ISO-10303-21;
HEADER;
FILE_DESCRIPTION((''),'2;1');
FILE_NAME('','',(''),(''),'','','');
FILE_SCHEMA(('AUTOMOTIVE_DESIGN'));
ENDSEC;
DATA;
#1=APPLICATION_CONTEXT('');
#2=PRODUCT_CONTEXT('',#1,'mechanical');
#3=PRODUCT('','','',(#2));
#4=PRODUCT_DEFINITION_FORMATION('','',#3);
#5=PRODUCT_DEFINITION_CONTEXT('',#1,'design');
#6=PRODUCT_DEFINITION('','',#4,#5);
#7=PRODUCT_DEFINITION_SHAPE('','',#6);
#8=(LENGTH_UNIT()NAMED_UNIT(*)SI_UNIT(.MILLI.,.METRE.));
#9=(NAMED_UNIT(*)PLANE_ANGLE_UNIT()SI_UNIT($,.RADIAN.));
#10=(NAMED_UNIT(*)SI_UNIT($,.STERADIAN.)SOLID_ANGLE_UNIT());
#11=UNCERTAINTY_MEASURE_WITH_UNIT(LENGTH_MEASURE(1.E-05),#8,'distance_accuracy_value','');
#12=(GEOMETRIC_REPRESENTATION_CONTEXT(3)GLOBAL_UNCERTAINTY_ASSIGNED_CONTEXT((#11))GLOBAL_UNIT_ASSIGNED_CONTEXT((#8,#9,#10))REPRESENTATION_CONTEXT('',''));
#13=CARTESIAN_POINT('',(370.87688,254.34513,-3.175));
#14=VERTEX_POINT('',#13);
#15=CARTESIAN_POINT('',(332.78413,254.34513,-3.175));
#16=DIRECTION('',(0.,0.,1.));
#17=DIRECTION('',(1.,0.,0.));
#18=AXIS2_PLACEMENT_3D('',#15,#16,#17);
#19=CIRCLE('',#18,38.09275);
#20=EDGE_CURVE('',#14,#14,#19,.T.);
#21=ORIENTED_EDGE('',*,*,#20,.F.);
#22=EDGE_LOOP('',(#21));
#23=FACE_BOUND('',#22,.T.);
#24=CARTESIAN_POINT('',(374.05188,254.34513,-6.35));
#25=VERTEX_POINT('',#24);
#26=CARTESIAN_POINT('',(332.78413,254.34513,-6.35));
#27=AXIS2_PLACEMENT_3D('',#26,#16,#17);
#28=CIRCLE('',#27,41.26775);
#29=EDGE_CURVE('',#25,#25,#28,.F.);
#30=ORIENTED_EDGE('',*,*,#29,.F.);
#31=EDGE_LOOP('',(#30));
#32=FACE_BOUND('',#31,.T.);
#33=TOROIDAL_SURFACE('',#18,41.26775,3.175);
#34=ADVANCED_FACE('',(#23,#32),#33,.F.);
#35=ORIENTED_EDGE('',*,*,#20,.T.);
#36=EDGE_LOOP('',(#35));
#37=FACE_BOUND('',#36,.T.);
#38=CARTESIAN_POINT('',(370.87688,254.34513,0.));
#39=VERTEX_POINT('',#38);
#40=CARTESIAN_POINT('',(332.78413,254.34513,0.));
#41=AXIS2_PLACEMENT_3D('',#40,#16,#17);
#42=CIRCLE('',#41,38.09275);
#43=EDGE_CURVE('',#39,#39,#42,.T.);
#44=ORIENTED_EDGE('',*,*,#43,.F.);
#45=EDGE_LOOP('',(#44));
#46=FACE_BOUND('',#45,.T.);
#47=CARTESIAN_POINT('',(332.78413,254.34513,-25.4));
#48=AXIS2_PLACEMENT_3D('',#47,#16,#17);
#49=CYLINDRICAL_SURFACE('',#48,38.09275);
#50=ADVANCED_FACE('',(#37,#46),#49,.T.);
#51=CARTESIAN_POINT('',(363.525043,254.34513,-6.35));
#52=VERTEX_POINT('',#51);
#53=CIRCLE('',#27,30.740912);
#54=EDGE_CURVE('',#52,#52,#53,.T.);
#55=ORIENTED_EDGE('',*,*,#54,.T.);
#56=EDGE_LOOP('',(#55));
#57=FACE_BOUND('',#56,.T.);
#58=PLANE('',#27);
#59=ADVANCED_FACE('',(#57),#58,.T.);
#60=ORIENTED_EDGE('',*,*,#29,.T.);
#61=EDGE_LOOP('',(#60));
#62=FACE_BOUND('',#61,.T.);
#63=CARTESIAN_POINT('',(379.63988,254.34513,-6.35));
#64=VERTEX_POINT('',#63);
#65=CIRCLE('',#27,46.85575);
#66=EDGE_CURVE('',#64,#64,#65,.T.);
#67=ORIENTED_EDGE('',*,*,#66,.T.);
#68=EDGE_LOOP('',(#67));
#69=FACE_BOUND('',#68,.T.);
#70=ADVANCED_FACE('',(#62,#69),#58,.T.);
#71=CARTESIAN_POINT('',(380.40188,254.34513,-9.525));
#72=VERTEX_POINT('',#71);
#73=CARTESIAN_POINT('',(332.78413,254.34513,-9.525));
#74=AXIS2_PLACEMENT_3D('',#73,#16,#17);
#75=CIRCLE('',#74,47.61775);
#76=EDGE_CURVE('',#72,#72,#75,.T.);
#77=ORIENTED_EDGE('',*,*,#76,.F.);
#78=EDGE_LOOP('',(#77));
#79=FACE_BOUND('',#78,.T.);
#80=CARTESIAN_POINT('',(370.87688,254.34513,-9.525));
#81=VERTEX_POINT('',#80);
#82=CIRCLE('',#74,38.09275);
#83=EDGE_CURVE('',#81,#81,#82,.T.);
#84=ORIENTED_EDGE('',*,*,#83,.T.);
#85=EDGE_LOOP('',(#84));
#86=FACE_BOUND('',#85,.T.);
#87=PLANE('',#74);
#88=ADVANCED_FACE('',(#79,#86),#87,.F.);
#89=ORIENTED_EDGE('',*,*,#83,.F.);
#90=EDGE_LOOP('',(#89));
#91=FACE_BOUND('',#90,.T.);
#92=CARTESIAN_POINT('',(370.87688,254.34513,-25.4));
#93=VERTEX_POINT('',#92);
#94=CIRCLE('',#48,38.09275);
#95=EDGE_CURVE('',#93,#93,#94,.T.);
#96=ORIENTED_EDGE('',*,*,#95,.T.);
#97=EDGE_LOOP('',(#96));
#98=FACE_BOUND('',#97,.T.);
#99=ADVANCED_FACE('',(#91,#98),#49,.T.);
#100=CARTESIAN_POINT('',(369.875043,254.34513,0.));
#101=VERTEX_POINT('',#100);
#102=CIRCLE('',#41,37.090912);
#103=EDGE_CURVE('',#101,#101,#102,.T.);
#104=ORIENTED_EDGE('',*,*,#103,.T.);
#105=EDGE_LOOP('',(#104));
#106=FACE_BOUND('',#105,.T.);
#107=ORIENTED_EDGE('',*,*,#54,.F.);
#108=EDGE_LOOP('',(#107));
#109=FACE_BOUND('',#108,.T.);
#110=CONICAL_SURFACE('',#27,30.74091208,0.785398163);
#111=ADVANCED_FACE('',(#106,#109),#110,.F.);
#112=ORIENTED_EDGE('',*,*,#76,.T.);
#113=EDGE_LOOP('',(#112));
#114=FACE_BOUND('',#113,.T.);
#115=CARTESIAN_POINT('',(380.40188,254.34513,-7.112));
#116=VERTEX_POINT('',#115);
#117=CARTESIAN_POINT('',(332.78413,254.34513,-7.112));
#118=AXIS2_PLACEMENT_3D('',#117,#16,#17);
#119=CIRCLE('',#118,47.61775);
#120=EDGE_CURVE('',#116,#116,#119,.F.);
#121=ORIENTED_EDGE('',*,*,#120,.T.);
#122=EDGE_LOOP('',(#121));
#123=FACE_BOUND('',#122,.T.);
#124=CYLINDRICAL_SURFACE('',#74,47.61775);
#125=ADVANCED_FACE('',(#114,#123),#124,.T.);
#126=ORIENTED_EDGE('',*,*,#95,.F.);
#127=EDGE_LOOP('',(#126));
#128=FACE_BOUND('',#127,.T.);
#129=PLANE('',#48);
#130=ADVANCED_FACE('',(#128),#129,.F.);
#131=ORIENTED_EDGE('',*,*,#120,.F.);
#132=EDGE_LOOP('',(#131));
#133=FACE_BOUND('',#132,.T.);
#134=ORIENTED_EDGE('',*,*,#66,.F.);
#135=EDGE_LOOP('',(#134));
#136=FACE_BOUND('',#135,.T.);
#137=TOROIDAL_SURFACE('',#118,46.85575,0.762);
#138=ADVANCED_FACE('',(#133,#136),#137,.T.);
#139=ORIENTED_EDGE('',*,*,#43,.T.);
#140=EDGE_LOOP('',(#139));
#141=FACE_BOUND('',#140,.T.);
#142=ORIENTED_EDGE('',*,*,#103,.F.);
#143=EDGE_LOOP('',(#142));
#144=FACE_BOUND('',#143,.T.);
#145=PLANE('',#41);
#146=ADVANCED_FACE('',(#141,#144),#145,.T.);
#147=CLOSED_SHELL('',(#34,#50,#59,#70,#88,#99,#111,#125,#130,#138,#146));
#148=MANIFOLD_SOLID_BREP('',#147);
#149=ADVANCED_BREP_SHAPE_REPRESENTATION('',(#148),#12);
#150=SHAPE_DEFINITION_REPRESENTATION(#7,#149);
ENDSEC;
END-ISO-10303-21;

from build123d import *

# Parameters (mm, degrees)
SKETCH2_R      = 38.092749534
EXTRUDE1_DEPTH = 25.4
SKETCH3_R      = 37.09091208
EXTRUDE2_DEPTH = 6.35
CHAMFER1_SIZE  = 6.35
EXTRUDE7_START = -6.35
SKETCH10_R     = 47.61774957
SKETCH10_R_2   = 38.092749534
EXTRUDE7_DEPTH = 3.175
FILLET1_R      = 3.175
FILLET2_R      = 0.762


with BuildPart() as part:
    # Sketch2 → Extrude1 (new body)
    with BuildSketch(Plane.XY):
        with Locations((332.784130452, 254.345130463)):
            Circle(SKETCH2_R)
    extrude(amount=-EXTRUDE1_DEPTH)

    # Sketch3 → Extrude2 (cut)
    with BuildSketch(Plane.XY):
        with Locations((332.784130452, 254.345130463)):
            Circle(SKETCH3_R)
    extrude(amount=-EXTRUDE2_DEPTH, mode=Mode.SUBTRACT)

    # Chamfer1
    chamfer1_edges = [part.edges().sort_by_distance(p)[0] for p in [
        (295.693218372, 254.345130463, -6.35),
    ]]
    chamfer(chamfer1_edges, length=CHAMFER1_SIZE - 0.0001)  # a hair under: the kernel refuses the full size

    # Sketch10 → Extrude7 (add)
    with BuildSketch(Plane.XY.offset(EXTRUDE7_START)):
        with Locations((332.784130452, 254.345130463)):
            Circle(SKETCH10_R)
        with Locations((332.784130452, 254.345130463)):
            Circle(SKETCH10_R_2, mode=Mode.SUBTRACT)
    extrude(amount=-EXTRUDE7_DEPTH)

    # Fillet1
    fillet1_edges = [part.edges().sort_by_distance(p)[0] for p in [
        (294.691380918, 254.345130463, -6.35),
    ]]
    fillet(fillet1_edges, radius=FILLET1_R)

    # Fillet2
    fillet2_edges = [part.edges().sort_by_distance(p)[0] for p in [
        (285.166380882, 254.345130463, -6.35),
    ]]
    fillet(fillet2_edges, radius=FILLET2_R)


solid = part.part
